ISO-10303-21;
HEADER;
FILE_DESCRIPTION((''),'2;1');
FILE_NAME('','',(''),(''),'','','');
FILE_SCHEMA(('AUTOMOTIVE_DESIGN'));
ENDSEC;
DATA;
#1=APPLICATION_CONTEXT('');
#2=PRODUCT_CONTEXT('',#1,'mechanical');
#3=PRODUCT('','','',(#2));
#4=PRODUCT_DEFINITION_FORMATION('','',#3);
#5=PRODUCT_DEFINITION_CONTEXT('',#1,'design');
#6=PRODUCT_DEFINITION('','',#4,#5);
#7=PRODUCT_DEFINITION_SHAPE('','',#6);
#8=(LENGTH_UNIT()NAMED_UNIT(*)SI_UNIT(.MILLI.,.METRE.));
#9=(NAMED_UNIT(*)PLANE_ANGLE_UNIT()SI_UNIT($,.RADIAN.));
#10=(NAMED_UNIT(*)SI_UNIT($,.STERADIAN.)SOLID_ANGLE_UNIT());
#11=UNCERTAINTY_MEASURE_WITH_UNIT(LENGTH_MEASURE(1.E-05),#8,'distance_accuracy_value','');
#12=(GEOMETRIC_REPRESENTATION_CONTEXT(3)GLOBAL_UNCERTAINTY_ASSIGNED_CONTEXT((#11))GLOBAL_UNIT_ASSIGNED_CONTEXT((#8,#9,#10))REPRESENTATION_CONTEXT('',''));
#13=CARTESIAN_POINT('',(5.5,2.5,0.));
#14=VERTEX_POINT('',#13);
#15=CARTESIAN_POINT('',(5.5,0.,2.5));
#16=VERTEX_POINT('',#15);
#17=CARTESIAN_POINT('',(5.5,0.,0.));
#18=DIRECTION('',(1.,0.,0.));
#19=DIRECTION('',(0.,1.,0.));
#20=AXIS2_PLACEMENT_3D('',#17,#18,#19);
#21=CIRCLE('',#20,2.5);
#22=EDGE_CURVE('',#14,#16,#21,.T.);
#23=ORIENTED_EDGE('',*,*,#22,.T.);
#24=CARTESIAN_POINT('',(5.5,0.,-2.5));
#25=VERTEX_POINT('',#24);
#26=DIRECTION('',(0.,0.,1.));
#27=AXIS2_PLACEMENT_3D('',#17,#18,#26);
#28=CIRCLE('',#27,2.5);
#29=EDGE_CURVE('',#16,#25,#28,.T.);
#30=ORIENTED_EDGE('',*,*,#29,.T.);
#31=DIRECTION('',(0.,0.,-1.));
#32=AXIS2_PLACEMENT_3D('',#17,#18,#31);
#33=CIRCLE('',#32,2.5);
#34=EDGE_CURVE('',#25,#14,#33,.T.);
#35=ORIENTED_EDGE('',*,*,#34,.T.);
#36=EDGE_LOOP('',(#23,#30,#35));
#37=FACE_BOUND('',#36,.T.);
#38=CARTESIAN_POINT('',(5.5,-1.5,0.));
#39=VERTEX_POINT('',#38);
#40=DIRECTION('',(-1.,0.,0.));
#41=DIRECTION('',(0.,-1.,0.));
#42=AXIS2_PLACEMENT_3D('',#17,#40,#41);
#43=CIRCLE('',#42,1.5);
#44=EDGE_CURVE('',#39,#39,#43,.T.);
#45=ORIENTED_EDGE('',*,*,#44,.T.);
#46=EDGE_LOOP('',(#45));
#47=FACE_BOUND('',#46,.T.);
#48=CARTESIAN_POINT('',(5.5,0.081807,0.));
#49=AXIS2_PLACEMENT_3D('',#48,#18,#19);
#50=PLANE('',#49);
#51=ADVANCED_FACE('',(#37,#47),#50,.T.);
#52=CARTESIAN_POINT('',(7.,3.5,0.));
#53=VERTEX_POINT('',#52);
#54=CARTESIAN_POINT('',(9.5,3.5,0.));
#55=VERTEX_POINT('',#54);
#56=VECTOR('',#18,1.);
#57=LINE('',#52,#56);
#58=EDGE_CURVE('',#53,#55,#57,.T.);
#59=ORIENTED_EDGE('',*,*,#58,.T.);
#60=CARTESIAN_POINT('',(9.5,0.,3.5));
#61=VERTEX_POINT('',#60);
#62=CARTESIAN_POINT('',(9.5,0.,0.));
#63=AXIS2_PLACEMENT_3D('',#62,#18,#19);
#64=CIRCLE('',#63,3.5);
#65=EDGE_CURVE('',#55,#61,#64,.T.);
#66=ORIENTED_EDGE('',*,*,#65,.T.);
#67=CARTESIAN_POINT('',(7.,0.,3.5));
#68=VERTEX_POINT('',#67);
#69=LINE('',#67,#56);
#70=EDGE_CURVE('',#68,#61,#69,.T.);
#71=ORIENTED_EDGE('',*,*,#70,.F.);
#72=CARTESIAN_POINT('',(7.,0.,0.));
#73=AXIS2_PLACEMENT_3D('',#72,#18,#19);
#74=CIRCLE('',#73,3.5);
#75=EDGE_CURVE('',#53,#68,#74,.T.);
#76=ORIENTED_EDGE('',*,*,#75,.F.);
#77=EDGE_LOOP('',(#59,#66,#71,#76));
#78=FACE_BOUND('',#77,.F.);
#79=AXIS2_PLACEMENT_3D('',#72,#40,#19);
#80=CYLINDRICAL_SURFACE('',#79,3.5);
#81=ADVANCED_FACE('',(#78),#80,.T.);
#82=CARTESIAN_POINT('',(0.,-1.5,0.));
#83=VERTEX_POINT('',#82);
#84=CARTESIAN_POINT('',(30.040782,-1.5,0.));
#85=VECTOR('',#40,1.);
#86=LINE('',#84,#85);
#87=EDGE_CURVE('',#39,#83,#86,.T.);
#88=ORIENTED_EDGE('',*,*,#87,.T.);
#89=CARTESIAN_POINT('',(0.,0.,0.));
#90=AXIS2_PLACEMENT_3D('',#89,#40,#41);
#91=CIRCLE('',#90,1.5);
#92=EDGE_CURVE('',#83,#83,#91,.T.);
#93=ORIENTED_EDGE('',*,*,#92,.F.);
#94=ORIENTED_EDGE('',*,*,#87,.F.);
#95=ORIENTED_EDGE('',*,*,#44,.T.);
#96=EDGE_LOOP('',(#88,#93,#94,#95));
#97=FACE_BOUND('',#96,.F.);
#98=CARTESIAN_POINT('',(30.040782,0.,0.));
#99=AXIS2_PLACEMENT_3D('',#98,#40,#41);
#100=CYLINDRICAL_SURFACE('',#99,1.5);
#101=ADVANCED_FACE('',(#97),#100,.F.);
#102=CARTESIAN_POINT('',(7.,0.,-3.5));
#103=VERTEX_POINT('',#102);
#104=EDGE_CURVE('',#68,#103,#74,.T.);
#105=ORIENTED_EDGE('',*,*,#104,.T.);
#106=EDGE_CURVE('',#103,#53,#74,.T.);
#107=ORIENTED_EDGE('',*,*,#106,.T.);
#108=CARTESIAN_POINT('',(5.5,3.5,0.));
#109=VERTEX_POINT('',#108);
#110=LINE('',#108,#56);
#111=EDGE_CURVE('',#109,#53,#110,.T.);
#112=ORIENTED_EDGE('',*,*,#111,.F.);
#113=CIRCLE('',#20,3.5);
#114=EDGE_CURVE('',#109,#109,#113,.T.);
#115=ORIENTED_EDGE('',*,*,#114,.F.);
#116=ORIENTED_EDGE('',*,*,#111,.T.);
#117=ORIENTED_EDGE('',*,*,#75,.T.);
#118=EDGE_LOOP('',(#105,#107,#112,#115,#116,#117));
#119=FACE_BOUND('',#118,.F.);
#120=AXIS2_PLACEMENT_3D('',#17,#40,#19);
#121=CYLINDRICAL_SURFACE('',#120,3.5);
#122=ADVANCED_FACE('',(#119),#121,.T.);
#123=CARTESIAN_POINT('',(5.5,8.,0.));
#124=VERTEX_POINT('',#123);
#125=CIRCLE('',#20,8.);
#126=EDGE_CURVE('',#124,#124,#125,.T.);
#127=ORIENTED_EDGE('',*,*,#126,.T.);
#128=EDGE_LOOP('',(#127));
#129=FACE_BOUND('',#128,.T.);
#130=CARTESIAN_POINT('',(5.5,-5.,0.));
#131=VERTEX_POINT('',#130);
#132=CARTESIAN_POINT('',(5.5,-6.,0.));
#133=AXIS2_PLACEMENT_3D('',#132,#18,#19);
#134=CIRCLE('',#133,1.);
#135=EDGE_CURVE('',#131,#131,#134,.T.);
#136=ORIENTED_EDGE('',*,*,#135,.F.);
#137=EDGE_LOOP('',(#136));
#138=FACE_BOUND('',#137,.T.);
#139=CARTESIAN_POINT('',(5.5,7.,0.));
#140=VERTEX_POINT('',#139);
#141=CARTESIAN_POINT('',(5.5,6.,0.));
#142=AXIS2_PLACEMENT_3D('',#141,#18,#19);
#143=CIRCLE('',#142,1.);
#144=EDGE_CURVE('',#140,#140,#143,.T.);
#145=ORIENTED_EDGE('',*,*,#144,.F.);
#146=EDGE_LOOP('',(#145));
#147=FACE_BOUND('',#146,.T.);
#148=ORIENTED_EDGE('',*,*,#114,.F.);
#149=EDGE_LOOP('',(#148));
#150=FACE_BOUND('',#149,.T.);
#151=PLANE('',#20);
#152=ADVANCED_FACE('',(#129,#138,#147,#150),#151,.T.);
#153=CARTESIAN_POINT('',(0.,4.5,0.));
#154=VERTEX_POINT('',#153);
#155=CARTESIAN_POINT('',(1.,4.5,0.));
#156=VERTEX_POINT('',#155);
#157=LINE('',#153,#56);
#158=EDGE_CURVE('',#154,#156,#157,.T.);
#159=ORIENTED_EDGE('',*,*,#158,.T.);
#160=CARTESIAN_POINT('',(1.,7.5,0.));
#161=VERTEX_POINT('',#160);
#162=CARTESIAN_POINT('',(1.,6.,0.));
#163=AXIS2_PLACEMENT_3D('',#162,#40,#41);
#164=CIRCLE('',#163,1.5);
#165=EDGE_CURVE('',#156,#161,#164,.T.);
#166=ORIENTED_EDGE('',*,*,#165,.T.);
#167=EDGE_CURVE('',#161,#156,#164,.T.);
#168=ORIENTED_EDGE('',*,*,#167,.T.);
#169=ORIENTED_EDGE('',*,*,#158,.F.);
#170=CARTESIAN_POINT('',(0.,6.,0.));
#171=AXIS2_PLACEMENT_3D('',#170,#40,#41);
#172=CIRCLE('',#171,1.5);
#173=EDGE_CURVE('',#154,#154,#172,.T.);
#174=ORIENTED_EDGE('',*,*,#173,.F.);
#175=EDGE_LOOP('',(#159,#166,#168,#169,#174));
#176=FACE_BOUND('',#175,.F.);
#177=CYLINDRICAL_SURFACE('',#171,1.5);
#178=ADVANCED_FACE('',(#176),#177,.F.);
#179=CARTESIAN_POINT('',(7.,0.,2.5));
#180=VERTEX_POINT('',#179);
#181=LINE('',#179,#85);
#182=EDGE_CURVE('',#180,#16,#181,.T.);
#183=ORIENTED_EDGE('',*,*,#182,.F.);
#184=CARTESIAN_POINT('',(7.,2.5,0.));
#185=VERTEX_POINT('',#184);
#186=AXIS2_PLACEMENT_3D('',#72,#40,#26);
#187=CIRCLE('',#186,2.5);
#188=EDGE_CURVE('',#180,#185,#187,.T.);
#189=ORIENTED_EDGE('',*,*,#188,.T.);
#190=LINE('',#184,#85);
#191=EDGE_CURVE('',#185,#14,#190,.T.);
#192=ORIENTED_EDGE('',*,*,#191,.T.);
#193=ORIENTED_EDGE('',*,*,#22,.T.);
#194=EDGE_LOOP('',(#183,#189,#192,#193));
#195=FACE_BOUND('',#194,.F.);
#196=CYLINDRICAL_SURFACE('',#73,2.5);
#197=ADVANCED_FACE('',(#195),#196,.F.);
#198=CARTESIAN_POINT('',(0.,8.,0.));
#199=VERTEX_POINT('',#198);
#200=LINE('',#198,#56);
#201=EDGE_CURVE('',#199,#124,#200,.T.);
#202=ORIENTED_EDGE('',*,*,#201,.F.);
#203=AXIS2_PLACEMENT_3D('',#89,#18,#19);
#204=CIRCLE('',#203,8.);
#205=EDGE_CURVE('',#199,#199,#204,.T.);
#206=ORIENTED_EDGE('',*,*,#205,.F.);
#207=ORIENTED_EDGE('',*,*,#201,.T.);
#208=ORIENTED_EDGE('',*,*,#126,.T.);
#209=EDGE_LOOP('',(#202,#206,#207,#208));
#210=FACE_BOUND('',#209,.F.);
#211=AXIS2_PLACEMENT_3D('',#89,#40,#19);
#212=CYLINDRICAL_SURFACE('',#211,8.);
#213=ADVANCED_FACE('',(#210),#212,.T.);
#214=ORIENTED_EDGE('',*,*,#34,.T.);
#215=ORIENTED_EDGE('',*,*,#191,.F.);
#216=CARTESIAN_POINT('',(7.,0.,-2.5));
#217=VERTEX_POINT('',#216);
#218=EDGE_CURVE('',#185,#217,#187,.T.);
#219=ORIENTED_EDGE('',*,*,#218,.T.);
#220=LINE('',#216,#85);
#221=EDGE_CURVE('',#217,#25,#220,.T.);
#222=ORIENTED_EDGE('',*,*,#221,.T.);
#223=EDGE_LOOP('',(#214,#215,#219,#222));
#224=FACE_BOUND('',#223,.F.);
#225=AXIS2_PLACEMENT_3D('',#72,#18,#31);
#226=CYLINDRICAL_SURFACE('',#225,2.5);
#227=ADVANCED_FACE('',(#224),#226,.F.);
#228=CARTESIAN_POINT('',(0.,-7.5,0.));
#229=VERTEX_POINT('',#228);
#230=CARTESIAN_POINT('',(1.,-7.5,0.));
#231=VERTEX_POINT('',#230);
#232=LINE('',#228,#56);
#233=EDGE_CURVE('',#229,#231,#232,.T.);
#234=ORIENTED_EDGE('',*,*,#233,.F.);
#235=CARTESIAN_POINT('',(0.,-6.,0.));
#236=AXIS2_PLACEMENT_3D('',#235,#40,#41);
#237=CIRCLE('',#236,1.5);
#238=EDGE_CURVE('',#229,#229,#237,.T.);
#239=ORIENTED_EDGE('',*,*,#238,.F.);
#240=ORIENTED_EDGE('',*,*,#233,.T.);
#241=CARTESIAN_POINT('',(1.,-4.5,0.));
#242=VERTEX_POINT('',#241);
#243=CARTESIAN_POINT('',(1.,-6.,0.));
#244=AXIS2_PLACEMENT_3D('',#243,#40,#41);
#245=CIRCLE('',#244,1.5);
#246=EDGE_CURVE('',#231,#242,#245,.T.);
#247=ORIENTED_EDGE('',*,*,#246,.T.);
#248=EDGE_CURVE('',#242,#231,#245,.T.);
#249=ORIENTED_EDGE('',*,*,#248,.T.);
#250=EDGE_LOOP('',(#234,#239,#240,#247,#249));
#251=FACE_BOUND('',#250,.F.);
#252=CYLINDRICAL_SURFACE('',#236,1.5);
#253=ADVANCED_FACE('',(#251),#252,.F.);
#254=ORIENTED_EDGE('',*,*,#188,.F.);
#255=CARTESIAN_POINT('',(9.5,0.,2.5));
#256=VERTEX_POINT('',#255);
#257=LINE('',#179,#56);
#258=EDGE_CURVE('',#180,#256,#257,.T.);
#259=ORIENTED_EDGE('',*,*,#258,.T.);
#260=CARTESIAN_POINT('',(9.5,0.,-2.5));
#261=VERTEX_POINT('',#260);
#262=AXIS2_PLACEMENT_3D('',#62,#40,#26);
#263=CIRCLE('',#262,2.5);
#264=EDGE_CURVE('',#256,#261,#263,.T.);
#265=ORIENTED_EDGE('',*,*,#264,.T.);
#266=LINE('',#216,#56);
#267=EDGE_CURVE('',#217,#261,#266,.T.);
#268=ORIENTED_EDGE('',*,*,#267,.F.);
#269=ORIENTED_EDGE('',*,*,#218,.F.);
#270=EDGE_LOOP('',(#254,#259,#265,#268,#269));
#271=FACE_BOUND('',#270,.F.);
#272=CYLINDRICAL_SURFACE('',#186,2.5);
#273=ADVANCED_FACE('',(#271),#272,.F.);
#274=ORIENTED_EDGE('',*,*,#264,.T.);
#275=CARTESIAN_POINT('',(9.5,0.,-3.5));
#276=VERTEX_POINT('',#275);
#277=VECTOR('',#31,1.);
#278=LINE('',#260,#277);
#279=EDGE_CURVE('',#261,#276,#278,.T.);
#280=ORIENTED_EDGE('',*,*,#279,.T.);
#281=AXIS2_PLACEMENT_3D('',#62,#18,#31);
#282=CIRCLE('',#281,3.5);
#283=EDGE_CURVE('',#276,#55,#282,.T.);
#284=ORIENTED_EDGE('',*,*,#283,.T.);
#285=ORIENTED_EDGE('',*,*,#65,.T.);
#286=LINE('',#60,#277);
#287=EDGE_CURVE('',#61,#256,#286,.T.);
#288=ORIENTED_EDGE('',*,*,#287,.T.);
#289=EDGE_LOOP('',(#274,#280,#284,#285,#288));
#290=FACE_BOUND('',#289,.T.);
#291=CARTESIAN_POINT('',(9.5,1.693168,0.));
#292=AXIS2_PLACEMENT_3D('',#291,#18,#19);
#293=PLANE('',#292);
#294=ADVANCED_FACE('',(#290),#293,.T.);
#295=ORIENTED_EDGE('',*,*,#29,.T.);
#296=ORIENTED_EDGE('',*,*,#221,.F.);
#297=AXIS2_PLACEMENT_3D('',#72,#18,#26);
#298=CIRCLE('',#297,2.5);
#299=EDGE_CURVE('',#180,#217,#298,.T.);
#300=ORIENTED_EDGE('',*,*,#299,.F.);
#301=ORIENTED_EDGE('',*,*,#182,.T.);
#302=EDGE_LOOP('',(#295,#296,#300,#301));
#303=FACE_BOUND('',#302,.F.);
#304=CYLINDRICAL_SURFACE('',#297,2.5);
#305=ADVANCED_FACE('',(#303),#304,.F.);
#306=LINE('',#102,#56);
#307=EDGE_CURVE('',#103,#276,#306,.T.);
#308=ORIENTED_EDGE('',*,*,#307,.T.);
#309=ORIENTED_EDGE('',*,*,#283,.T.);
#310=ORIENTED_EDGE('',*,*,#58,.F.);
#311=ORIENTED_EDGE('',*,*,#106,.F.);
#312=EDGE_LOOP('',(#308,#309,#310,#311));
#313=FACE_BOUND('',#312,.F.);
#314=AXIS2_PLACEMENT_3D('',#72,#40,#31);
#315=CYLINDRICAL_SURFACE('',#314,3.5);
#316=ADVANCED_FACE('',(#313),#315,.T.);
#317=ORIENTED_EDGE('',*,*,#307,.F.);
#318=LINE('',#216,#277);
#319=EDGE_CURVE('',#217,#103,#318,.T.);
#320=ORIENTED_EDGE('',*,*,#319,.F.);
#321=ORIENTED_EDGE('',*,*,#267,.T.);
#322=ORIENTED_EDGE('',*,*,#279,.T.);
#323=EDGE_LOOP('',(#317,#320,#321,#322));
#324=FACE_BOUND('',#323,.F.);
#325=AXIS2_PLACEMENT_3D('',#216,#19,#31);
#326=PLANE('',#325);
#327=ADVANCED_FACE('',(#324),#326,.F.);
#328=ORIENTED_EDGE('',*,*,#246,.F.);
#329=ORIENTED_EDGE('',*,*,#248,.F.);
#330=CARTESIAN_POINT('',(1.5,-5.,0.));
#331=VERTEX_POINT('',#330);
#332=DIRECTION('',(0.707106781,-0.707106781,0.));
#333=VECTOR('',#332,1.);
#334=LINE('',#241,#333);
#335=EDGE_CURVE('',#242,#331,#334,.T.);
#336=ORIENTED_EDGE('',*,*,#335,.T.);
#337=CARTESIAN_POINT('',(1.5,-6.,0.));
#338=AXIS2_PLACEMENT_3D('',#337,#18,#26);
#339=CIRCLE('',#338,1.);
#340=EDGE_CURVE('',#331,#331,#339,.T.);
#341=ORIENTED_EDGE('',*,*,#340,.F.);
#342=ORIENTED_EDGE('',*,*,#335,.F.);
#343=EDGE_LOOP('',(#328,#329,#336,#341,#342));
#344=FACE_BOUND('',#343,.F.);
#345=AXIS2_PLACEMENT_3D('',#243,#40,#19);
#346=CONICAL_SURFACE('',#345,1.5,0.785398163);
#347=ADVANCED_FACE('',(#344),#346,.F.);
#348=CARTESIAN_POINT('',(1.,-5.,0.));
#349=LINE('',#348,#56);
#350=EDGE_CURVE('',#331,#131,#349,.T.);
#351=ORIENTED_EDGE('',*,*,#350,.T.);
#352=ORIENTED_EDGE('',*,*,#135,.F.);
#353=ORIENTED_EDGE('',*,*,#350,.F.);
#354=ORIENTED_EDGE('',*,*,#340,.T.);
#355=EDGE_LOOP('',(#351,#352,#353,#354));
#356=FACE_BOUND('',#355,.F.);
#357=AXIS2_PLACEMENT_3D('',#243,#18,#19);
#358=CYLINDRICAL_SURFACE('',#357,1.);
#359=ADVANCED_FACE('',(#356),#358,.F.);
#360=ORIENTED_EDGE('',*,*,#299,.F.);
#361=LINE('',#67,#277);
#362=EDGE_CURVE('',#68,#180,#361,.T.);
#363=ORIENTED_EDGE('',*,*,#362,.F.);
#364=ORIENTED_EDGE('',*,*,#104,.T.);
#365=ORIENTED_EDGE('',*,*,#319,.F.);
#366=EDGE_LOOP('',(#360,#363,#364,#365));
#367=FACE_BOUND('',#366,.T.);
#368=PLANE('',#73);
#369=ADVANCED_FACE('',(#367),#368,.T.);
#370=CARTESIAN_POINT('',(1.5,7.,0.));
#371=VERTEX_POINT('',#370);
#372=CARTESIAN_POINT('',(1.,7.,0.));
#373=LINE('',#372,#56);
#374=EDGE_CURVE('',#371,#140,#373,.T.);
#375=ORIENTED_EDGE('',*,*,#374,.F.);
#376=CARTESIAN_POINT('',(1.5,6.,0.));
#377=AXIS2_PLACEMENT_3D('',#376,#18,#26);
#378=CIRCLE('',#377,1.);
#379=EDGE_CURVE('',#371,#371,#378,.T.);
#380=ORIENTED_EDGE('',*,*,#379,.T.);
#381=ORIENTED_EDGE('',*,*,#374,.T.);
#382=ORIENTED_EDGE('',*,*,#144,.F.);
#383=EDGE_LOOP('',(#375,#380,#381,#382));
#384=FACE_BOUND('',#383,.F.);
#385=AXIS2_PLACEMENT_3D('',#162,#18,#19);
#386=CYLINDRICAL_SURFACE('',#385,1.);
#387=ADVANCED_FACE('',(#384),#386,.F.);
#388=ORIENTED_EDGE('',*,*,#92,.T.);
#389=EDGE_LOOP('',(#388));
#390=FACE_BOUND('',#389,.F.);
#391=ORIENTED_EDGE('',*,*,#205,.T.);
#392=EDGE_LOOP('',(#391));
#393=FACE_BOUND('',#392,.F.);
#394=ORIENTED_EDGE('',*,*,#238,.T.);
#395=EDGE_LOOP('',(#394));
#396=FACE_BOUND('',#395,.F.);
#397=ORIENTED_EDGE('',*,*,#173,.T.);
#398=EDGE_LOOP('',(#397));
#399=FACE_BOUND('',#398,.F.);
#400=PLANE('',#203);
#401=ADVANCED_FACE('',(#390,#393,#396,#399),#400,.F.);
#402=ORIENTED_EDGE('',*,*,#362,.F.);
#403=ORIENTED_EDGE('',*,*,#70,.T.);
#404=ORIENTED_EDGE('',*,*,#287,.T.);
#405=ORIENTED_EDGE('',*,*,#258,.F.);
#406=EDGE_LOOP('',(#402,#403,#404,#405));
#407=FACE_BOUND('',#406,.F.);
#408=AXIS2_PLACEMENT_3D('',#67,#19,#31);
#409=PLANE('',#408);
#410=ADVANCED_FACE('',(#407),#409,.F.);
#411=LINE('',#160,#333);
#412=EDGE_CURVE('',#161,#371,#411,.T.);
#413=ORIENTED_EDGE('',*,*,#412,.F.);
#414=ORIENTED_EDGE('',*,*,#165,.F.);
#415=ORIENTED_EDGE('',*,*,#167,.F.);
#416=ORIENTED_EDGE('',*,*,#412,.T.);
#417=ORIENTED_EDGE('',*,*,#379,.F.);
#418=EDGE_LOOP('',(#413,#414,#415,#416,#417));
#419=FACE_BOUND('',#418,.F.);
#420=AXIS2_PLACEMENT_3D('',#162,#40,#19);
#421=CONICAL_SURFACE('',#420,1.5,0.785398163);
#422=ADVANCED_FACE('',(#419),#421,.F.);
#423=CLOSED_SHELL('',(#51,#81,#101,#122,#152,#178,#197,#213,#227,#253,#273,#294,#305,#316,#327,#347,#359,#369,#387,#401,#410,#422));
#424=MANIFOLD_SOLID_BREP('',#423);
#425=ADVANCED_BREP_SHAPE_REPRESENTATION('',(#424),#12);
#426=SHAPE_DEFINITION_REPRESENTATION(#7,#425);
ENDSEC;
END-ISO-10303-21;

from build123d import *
from build123d import SkipClean  # not in build123d's __all__

# Parameters (mm, degrees)
F0_R            = 8
F1_DEPTH        = 5.5
F2_R            = 3.5
F3_DEPTH        = 1.5
F5_DEPTH        = 2.5
F7_DEPTH        = 1.5
F9_D            = 3
F10_R           = 1.5
F11_DEPTH       = 1
F13_D           = 2
F13_CSINK_D     = 3
F13_CSINK_ANGLE = 90


with BuildPart() as f1:
    # F0 (on Right) → F1 (new body)
    with BuildSketch(Plane.YZ):
        Circle(F0_R)
    extrude(amount=F1_DEPTH)

    # F2 (on face) → F3 (join)
    with BuildSketch(Plane.YZ.offset(5.5)):
        Circle(F2_R)
    extrude(amount=F3_DEPTH)

    # F4 (on face) → F5 (join)
    with BuildSketch(Plane.YZ.offset(7)):
        with BuildLine():
            Line((0, -2.5), (0, -3.5))
            ThreePointArc((0, -3.5), (2.4748737342, -2.4748737342), (3.5, 0))
            ThreePointArc((3.5, 0), (2.4748737342, 2.4748737342), (0, 3.5))
            Line((0, 3.5), (0, 2.5))
            ThreePointArc((0, 2.5), (2.5, 0), (0, -2.5))
        make_face()
    extrude(amount=F5_DEPTH)

    # F6 (on face) → F7 (cut)
    with BuildSketch(Plane.YZ.offset(7)):
        with BuildLine():
            ThreePointArc((0, -2.5), (1.767766953, -1.767766953), (2.5, 0))
            ThreePointArc((2.5, 0), (1.767766953, 1.767766953), (0, 2.5))
            ThreePointArc((0, 2.5), (-2.5, 0), (0, -2.5))
        make_face()
    with SkipClean():  # cleaning this boolean's faces spoils the solid; the shape is the same uncleaned
        extrude(amount=-F7_DEPTH, mode=Mode.SUBTRACT)

    # F9 (through all)
    with Locations(Plane.YZ.offset(5.5)):
        with Locations((0, 0)):
            Hole(F9_D / 2)

    # F10 (on face) → F11 (cut)
    with BuildSketch(Plane(origin=(0, 0, 0), x_dir=(0, -1, 0), z_dir=(-1, 0, 0))):
        with Locations((-6, 0)):
            Circle(F10_R)
        with Locations((6, 0)):
            Circle(F10_R)
    extrude(amount=-F11_DEPTH, mode=Mode.SUBTRACT)

    # F13 (through all)
    with Locations(Plane(origin=(1, 0, 0), x_dir=(0, -1, 0), z_dir=(-1, 0, 0))):
        with Locations((-6, 0), (6, 0)):
            CounterSinkHole(F13_D / 2, F13_CSINK_D / 2, counter_sink_angle=F13_CSINK_ANGLE)


solid = f1.part
